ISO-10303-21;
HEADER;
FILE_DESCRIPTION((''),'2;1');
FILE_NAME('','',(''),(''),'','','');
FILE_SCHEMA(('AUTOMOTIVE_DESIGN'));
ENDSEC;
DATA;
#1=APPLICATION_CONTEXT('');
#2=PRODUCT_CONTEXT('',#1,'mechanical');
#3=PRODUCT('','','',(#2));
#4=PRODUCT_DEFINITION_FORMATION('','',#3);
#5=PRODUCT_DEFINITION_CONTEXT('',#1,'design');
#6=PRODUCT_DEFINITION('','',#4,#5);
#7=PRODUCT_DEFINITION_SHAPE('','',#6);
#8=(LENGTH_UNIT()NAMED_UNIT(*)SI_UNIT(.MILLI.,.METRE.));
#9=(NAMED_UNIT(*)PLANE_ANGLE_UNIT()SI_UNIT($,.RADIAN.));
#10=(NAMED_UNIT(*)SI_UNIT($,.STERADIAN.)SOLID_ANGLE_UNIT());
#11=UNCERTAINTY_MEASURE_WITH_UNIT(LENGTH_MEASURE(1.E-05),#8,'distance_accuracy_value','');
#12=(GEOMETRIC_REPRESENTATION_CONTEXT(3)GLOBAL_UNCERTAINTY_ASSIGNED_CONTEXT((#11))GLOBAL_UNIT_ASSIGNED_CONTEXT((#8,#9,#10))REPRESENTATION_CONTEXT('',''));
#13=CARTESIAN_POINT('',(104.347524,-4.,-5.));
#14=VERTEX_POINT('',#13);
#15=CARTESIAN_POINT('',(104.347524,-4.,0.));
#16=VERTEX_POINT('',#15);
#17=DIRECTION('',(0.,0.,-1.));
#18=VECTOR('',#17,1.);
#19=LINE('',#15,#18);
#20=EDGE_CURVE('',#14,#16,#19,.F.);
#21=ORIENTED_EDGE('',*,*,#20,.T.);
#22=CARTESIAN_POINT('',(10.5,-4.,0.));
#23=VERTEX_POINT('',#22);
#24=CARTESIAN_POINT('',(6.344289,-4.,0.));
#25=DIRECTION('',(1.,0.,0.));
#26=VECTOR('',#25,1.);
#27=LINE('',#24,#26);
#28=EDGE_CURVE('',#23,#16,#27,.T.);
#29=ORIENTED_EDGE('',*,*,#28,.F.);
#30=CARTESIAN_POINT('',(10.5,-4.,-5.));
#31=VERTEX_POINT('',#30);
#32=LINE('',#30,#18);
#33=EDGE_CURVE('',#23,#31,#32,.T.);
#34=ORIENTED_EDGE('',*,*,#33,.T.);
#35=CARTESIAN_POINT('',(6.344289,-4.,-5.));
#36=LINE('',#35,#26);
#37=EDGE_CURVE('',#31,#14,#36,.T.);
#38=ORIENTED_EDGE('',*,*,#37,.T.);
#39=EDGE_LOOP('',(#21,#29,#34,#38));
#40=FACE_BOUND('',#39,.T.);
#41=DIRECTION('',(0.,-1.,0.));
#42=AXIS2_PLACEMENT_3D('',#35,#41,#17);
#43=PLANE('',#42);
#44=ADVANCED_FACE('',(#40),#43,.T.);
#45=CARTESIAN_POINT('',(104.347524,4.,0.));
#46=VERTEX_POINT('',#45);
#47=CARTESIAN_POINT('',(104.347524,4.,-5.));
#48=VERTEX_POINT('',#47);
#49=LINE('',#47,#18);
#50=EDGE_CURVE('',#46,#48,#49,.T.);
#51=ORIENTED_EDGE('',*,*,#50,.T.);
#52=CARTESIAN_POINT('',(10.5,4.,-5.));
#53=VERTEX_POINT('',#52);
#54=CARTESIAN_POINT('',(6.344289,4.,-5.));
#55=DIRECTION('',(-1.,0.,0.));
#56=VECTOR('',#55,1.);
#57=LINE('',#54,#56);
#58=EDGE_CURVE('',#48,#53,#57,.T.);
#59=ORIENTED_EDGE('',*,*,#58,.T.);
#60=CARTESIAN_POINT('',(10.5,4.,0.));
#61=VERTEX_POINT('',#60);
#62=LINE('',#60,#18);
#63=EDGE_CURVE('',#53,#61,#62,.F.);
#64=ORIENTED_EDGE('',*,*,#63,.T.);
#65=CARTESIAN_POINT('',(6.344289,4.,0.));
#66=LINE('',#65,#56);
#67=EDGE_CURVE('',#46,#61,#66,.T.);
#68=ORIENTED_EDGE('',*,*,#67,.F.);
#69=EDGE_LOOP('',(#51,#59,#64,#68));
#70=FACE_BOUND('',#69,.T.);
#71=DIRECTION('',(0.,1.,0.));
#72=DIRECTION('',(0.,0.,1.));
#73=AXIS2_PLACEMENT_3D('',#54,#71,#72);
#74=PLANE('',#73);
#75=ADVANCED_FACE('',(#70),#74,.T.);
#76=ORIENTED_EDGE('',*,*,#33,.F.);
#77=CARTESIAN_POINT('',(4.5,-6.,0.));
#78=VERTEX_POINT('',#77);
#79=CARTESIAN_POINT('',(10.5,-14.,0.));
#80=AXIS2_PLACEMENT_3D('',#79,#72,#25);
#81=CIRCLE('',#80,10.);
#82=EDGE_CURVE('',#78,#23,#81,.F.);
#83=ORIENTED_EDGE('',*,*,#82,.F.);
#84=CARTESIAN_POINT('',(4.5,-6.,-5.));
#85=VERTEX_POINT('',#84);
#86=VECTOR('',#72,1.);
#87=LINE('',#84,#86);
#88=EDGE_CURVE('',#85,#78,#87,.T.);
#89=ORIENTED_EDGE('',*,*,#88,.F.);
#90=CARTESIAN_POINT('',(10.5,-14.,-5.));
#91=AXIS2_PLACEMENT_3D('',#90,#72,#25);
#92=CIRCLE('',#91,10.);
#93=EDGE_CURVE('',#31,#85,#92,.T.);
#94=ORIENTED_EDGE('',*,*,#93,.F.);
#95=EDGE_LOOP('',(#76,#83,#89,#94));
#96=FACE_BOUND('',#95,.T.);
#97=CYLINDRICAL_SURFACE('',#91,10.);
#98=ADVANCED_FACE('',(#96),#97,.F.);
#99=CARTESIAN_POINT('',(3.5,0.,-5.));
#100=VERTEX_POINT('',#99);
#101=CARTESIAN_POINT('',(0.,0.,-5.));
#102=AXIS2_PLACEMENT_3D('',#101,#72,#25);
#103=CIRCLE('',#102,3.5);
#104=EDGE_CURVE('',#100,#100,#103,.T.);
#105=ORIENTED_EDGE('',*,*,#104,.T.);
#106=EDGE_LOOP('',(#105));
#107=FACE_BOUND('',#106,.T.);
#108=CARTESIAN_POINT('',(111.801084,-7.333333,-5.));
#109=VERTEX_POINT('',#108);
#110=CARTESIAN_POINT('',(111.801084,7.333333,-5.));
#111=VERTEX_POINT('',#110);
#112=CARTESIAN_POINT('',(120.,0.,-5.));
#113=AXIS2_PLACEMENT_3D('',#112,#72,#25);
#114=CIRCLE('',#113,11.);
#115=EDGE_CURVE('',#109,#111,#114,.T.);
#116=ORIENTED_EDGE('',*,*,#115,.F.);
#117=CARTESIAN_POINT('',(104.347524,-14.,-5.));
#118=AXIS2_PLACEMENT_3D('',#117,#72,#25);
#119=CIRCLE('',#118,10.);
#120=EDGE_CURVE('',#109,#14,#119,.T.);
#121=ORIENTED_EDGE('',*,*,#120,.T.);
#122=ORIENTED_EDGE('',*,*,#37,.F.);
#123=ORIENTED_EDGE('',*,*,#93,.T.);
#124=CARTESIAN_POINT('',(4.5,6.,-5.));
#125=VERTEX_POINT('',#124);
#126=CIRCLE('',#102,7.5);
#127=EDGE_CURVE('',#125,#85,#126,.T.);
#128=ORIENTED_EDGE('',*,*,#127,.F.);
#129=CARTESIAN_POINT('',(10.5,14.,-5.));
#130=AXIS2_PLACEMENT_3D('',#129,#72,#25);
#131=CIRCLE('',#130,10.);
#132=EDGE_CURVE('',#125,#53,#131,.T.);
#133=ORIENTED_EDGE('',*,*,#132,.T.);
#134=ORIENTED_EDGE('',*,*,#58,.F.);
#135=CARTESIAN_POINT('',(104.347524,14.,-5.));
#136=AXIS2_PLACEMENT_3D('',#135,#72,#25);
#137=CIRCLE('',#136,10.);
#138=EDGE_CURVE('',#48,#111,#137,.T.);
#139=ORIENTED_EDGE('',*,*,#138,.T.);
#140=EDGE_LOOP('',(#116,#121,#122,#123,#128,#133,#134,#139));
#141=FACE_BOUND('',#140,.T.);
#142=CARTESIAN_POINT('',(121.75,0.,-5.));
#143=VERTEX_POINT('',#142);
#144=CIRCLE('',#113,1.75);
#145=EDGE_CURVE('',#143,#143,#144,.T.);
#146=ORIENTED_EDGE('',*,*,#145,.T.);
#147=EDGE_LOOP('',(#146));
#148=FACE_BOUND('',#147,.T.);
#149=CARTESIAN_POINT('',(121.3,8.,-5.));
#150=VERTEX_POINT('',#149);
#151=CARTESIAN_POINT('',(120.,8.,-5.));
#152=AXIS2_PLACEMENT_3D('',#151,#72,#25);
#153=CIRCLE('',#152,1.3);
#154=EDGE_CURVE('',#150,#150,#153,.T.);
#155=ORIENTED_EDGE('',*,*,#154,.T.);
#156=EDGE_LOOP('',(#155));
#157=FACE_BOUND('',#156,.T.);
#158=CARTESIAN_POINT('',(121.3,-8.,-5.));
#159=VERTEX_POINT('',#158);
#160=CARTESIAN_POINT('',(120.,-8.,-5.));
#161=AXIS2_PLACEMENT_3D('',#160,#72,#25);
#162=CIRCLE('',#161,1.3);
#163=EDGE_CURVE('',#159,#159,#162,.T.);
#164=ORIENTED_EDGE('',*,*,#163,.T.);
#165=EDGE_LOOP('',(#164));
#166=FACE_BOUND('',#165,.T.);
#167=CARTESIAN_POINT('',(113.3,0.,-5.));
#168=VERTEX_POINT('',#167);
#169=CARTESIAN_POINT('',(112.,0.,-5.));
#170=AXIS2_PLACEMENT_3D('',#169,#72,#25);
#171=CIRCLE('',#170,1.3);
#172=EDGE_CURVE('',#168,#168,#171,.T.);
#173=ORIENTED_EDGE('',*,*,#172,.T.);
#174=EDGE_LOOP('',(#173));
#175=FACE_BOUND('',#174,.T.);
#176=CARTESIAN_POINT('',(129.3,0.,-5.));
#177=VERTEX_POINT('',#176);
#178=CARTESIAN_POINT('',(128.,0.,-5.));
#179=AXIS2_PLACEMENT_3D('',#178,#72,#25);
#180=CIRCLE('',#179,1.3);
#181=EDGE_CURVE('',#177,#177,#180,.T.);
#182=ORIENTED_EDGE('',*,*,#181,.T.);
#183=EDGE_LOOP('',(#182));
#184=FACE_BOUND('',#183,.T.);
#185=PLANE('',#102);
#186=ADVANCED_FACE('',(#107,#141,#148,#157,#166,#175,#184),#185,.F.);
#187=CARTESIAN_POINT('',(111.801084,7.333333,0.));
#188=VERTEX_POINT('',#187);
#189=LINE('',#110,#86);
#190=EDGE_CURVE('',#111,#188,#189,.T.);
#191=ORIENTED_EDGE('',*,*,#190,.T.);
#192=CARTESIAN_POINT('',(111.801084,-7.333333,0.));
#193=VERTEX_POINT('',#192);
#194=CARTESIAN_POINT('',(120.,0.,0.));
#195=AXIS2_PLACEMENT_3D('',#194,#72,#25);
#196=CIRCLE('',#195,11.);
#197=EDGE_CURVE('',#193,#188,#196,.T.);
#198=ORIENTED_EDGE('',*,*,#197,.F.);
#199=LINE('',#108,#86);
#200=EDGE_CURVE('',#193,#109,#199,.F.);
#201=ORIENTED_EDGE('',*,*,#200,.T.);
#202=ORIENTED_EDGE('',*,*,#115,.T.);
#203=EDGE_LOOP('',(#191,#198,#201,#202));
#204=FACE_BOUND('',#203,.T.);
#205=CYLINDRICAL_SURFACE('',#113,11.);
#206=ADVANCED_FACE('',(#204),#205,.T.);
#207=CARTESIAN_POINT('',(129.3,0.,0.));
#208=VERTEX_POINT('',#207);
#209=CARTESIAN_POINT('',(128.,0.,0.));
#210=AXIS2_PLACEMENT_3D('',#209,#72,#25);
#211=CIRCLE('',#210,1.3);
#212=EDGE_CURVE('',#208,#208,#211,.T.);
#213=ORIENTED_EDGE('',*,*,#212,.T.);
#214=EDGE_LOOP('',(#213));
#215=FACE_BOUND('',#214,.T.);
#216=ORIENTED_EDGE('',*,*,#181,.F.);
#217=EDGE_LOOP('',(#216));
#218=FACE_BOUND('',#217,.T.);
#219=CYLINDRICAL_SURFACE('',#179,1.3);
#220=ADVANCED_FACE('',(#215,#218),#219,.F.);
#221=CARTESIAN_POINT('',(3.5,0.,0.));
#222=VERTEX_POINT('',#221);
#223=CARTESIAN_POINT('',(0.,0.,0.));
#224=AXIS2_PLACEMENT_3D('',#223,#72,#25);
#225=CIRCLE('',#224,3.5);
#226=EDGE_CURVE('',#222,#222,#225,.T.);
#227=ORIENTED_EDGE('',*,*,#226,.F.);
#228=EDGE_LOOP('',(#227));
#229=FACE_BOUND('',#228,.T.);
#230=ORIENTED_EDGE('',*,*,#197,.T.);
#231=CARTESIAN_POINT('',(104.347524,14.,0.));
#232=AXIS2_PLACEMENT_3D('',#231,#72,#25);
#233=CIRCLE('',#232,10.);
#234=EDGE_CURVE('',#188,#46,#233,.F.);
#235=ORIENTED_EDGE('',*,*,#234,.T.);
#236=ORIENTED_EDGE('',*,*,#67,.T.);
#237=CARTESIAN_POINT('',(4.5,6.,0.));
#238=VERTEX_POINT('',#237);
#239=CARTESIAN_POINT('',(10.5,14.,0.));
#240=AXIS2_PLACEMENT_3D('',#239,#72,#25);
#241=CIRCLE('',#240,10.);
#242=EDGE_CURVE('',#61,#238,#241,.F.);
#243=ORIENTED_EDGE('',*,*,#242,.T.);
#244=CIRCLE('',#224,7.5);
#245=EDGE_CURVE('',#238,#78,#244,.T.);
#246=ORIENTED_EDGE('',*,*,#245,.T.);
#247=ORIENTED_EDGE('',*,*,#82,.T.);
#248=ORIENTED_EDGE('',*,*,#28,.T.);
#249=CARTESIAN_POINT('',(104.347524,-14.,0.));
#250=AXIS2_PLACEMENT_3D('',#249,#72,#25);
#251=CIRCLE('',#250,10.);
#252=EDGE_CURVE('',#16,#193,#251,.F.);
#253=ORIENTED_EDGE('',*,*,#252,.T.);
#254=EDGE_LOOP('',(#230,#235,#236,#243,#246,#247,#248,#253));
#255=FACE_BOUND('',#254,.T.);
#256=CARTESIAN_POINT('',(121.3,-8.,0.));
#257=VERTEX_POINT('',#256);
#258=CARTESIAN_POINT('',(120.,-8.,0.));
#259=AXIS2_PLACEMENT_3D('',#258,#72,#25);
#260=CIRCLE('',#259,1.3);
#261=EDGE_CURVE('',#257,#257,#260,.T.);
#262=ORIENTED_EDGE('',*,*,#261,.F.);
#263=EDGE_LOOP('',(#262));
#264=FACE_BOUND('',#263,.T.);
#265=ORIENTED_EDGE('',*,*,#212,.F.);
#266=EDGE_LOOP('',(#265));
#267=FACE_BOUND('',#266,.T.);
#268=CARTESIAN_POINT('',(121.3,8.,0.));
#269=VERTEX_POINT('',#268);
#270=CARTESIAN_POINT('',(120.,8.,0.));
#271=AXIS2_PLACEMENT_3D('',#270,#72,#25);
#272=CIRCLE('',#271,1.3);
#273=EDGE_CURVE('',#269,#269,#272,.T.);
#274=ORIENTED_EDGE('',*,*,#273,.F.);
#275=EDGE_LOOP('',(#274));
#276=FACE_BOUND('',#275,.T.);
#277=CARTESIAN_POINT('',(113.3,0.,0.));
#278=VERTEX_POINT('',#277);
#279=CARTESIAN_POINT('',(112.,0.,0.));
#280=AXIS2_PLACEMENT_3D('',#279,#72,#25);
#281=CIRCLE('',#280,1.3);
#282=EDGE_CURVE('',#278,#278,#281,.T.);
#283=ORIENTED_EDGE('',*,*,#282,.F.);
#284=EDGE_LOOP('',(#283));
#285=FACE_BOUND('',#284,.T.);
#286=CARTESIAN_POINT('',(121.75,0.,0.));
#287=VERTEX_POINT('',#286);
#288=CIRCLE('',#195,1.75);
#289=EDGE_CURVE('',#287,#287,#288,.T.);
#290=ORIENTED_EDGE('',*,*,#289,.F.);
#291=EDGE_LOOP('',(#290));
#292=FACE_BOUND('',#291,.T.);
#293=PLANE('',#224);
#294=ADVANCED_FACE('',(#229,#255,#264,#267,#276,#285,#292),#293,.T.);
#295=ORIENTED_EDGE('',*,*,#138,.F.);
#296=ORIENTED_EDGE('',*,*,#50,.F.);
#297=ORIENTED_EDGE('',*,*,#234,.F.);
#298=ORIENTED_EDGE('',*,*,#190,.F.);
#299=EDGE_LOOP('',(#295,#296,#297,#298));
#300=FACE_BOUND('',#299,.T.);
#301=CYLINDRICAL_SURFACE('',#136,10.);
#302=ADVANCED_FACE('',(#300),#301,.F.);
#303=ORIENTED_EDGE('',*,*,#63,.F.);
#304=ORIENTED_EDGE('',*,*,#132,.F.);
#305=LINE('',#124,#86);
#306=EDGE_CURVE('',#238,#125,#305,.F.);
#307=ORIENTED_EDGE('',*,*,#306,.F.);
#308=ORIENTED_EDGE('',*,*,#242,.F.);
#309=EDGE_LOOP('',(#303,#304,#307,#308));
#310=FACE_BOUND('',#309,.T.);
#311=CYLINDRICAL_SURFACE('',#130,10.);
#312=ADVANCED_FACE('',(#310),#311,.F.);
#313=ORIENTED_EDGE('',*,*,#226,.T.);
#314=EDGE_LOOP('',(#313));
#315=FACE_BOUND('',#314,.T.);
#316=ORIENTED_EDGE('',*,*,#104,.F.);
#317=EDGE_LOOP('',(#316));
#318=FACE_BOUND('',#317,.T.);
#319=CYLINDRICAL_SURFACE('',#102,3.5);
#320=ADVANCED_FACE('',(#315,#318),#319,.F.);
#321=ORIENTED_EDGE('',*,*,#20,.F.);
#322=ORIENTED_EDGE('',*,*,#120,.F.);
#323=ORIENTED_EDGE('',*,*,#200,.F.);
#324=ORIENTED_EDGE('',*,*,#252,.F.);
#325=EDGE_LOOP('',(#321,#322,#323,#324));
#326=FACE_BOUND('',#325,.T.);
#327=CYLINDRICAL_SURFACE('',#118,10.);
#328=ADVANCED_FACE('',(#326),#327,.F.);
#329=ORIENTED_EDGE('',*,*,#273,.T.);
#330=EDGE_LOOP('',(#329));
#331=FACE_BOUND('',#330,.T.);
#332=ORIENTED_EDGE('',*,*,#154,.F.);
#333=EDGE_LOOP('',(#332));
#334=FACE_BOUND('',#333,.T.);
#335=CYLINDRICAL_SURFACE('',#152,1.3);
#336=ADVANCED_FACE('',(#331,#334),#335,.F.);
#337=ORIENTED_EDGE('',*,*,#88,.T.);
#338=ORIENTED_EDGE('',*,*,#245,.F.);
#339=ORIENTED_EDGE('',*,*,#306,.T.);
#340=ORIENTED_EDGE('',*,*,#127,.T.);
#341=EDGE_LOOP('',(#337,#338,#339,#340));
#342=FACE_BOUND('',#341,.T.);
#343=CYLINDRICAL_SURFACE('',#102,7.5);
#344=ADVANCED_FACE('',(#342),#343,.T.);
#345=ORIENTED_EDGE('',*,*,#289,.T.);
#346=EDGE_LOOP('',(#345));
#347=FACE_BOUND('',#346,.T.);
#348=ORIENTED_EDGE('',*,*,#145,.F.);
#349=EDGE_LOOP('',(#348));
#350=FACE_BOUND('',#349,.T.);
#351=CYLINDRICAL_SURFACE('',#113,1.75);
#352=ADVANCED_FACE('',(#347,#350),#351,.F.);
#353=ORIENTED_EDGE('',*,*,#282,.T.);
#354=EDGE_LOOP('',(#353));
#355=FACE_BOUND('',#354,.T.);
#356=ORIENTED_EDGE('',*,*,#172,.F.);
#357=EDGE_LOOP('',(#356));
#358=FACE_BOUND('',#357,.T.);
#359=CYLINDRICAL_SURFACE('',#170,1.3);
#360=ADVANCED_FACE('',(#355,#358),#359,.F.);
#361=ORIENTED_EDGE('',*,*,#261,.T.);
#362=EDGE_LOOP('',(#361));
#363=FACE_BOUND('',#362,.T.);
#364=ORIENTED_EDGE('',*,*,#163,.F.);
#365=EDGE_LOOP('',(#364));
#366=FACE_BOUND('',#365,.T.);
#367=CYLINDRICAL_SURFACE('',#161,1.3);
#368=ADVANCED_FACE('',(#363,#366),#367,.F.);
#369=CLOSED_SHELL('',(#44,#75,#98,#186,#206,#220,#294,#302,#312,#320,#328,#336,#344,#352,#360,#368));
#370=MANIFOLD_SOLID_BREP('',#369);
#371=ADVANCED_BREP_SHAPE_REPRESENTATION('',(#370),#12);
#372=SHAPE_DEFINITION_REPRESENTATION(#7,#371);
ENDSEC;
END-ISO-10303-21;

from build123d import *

# Parameters (mm, degrees)
SKETCH1_R          = 3.5
SKETCH1_R_2        = 1.3
SKETCH1_R_3        = 1.75
BASE_FLANGE1_DEPTH = 5
FILLET1_R          = 10
FILLET2_R          = 10


# Sheet-metal steps are written as plain solids
with BuildPart() as part:
    # Sketch1 → Base-Flange1 (new body)
    with BuildSketch(Plane.XY):
        with BuildLine():
            Line((6.34428877, 4), (109.753049234, 4))
            ThreePointArc((109.753049234, 4), (131, 0), (109.753049234, -4))
            Line((109.753049234, -4), (6.34428877, -4))
            ThreePointArc((6.34428877, -4), (-7.5, 0), (6.34428877, 4))
        make_face()
        Circle(SKETCH1_R, mode=Mode.SUBTRACT)
        with Locations((112, 0)):
            Circle(SKETCH1_R_2, mode=Mode.SUBTRACT)
        with Locations((120, -8)):
            Circle(SKETCH1_R_2, mode=Mode.SUBTRACT)
        with Locations((128, 0)):
            Circle(SKETCH1_R_2, mode=Mode.SUBTRACT)
        with Locations((120, 8)):
            Circle(SKETCH1_R_2, mode=Mode.SUBTRACT)
        with Locations((120, 0)):
            Circle(SKETCH1_R_3, mode=Mode.SUBTRACT)
    extrude(amount=-BASE_FLANGE1_DEPTH)

    # Fillet1
    fillet1_edges = [part.edges().sort_by_distance(p)[0] for p in [
        (6.34428877, 4, -2.5),
        (6.34428877, -4, -2.5),
    ]]
    fillet(fillet1_edges, radius=FILLET1_R)

    # Fillet2
    fillet2_edges = [part.edges().sort_by_distance(p)[0] for p in [
        (109.753049234, 4, -2.5),
        (109.753049234, -4, -2.5),
    ]]
    fillet(fillet2_edges, radius=FILLET2_R)


solid = part.part
